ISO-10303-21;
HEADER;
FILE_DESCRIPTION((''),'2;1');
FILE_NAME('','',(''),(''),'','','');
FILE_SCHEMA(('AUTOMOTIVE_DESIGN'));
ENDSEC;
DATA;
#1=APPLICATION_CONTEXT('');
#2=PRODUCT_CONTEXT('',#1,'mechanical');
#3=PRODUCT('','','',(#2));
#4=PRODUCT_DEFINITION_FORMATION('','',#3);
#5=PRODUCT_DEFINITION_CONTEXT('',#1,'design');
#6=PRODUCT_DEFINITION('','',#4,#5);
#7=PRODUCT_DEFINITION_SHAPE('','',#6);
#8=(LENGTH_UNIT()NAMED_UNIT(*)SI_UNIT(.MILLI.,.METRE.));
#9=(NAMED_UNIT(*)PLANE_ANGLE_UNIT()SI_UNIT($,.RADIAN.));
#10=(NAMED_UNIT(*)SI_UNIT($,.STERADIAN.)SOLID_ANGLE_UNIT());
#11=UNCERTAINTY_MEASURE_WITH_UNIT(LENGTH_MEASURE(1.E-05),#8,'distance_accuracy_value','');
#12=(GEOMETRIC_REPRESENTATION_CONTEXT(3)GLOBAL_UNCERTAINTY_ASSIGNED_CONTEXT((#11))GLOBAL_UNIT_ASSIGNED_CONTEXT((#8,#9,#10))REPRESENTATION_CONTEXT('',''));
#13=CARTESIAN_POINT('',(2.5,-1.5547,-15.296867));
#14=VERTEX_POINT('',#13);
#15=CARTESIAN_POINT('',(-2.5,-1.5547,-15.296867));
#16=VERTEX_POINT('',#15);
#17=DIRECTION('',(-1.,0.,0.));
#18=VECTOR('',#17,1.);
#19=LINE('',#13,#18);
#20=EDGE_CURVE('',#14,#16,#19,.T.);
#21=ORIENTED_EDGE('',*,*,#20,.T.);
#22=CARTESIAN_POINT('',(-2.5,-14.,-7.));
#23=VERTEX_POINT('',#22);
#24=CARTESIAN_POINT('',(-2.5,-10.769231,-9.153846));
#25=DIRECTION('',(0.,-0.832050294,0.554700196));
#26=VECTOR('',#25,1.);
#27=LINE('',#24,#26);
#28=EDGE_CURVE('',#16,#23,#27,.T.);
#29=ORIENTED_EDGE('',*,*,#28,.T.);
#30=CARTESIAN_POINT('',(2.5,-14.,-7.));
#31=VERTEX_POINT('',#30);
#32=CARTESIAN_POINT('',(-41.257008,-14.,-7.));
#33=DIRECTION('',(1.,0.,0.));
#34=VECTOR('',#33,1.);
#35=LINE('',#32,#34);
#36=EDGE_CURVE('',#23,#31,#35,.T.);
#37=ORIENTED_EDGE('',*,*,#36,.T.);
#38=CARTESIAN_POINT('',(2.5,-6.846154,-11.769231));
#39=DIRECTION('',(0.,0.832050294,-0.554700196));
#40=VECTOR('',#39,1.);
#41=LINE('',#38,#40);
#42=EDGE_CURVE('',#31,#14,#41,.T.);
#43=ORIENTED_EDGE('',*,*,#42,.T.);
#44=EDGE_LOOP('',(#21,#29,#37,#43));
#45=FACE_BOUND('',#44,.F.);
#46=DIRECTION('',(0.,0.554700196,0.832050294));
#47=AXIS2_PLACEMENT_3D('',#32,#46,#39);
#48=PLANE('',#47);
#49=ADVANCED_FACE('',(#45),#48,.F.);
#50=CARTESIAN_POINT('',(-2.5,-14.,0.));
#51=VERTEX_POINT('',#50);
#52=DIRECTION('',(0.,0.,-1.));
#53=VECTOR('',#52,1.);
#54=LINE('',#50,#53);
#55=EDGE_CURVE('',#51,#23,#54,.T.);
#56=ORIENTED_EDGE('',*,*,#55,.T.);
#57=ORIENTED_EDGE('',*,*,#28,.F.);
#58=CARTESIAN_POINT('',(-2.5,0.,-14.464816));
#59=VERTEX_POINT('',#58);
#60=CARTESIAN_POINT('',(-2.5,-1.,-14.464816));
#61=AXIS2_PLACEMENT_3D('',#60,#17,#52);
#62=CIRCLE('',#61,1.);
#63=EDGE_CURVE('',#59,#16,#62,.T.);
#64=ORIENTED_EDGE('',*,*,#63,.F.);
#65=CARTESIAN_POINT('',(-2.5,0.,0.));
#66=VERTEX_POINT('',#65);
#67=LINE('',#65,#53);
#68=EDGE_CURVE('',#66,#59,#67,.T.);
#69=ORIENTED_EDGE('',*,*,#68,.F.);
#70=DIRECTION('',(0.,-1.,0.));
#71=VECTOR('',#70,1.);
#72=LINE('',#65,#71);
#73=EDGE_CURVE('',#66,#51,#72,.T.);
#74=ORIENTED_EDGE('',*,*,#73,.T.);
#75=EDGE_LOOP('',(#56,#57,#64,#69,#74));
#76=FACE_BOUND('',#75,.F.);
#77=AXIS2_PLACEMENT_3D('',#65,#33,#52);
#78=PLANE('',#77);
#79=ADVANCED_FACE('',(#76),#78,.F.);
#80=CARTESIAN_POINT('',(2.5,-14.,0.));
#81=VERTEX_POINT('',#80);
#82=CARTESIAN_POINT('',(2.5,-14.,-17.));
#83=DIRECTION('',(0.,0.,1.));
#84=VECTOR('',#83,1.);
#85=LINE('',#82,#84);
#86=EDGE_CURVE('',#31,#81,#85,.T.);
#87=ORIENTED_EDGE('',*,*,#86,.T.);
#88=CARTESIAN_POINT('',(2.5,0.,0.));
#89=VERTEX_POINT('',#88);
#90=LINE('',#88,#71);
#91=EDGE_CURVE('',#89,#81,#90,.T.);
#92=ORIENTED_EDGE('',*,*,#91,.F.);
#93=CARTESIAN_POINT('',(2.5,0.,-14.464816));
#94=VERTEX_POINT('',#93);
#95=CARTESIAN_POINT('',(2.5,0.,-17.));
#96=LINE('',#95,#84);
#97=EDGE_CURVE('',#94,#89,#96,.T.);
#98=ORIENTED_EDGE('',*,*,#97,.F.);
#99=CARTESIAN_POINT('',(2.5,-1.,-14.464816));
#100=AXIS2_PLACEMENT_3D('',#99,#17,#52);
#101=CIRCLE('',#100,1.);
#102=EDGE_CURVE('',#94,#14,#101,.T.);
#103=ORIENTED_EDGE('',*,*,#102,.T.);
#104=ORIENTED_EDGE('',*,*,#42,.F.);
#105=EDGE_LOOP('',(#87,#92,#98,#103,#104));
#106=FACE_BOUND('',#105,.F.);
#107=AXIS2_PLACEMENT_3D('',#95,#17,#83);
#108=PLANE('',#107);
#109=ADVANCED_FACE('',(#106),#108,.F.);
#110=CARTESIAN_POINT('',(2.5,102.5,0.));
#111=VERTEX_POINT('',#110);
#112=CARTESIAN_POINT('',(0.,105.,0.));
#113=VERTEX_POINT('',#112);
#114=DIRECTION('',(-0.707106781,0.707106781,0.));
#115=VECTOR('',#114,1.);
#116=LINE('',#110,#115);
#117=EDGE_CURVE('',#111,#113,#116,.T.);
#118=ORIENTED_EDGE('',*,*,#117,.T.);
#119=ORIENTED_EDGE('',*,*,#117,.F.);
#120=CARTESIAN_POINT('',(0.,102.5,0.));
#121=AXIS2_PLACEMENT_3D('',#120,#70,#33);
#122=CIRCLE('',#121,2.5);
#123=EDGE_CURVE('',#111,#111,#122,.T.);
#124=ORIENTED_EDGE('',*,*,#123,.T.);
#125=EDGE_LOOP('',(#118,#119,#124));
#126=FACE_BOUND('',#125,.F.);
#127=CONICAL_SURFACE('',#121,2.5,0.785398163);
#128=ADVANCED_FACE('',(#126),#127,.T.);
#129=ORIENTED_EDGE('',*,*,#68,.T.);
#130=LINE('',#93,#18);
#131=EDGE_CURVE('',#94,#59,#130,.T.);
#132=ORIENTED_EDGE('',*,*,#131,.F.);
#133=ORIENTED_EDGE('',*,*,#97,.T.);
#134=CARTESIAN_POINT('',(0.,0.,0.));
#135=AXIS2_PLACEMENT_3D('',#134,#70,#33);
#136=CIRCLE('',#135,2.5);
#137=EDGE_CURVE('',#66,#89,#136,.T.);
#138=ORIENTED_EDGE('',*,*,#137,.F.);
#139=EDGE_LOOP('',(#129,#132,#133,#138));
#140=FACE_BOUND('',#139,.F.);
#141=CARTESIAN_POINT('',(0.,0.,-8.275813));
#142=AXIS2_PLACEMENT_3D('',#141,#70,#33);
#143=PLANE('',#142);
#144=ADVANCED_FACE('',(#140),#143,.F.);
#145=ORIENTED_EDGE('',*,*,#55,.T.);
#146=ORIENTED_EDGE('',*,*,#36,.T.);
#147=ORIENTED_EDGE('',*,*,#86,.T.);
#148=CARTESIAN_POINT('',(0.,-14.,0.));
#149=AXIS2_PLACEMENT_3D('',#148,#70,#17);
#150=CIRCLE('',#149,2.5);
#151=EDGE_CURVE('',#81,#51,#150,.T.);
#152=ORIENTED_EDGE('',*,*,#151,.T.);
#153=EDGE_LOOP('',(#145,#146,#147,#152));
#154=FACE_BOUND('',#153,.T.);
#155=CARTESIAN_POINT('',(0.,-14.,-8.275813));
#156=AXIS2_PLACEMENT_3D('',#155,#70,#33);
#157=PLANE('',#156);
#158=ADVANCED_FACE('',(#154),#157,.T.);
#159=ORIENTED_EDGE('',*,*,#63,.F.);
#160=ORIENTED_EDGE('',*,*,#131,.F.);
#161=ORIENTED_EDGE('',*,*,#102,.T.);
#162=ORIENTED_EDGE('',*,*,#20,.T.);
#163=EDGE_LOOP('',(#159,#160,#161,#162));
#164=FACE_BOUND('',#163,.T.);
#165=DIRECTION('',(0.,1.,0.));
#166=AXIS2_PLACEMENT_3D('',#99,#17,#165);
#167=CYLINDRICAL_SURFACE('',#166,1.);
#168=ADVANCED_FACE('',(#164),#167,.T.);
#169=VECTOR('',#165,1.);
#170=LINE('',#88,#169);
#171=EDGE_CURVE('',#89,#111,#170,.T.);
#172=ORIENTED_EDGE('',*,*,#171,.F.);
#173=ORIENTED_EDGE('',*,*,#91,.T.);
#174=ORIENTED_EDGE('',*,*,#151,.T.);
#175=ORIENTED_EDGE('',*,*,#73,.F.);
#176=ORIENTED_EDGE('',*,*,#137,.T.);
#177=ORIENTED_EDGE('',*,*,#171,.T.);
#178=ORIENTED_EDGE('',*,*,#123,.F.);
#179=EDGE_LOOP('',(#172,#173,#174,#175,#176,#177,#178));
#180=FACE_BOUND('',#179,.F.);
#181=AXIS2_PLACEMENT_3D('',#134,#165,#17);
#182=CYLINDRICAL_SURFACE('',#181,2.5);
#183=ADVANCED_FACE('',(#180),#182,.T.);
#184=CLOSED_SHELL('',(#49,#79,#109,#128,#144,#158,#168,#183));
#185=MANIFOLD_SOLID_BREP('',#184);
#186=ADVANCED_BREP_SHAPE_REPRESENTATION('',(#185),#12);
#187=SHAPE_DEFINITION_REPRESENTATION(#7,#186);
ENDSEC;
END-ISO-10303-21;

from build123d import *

# Parameters (mm, degrees)
F0_R        = 2.5
F1_DEPTH    = 105
F3_DEPTH    = 14
F4_SIZE     = 2.5
F5_T1_DEPTH = 82.5140157162
F6_R        = 1


# Not quite as in the source:
# - a fillet or chamfer that OpenCascade refuses, or shapes differently, is made with other operations: its cross-section is extruded or revolved along the edge and cut away or added


with BuildPart() as f1:
    # F0 (on Front) → F1 (new body)
    with BuildSketch(Plane.XZ):
        Circle(F0_R)
    extrude(amount=-F1_DEPTH)

    # F2 (on face) → F3 (join)
    with BuildSketch(Plane.XZ):
        with BuildLine():
            Line((-2.5, 0), (-2.5, -17))
            Line((-2.5, -17), (2.5, -17))
            Line((2.5, -17), (2.5, 0))
            ThreePointArc((2.5, 0), (0, -2.5), (-2.5, 0))
        make_face()
        with BuildLine():
            ThreePointArc((2.5, 0), (0, 2.5), (-2.5, 0))
            ThreePointArc((-2.5, 0), (0, -2.5), (2.5, 0))
        make_face()
    extrude(amount=F3_DEPTH)

    # F4
    f4_edges = [f1.edges().sort_by_distance(p)[0] for p in [
        (-2.5, 105, 0),
    ]]
    chamfer(f4_edges, length=F4_SIZE)

    # F5: chamfer of 10 x 15 on 1 edges, made by hand

    # F5_s2 → F5_t1 (cut)
    with BuildSketch(Plane.YZ.offset(-41.2570078581)):
        Polygon((-14, -7), (1, -17), (-14, -17), align=None)
    extrude(amount=F5_T1_DEPTH, mode=Mode.SUBTRACT)

    # F6
    f6_edges = [f1.edges().sort_by_distance(p)[0] for p in [
        (0, 0, -16.333333),
    ]]
    fillet(f6_edges, radius=F6_R)


solid = f1.part
